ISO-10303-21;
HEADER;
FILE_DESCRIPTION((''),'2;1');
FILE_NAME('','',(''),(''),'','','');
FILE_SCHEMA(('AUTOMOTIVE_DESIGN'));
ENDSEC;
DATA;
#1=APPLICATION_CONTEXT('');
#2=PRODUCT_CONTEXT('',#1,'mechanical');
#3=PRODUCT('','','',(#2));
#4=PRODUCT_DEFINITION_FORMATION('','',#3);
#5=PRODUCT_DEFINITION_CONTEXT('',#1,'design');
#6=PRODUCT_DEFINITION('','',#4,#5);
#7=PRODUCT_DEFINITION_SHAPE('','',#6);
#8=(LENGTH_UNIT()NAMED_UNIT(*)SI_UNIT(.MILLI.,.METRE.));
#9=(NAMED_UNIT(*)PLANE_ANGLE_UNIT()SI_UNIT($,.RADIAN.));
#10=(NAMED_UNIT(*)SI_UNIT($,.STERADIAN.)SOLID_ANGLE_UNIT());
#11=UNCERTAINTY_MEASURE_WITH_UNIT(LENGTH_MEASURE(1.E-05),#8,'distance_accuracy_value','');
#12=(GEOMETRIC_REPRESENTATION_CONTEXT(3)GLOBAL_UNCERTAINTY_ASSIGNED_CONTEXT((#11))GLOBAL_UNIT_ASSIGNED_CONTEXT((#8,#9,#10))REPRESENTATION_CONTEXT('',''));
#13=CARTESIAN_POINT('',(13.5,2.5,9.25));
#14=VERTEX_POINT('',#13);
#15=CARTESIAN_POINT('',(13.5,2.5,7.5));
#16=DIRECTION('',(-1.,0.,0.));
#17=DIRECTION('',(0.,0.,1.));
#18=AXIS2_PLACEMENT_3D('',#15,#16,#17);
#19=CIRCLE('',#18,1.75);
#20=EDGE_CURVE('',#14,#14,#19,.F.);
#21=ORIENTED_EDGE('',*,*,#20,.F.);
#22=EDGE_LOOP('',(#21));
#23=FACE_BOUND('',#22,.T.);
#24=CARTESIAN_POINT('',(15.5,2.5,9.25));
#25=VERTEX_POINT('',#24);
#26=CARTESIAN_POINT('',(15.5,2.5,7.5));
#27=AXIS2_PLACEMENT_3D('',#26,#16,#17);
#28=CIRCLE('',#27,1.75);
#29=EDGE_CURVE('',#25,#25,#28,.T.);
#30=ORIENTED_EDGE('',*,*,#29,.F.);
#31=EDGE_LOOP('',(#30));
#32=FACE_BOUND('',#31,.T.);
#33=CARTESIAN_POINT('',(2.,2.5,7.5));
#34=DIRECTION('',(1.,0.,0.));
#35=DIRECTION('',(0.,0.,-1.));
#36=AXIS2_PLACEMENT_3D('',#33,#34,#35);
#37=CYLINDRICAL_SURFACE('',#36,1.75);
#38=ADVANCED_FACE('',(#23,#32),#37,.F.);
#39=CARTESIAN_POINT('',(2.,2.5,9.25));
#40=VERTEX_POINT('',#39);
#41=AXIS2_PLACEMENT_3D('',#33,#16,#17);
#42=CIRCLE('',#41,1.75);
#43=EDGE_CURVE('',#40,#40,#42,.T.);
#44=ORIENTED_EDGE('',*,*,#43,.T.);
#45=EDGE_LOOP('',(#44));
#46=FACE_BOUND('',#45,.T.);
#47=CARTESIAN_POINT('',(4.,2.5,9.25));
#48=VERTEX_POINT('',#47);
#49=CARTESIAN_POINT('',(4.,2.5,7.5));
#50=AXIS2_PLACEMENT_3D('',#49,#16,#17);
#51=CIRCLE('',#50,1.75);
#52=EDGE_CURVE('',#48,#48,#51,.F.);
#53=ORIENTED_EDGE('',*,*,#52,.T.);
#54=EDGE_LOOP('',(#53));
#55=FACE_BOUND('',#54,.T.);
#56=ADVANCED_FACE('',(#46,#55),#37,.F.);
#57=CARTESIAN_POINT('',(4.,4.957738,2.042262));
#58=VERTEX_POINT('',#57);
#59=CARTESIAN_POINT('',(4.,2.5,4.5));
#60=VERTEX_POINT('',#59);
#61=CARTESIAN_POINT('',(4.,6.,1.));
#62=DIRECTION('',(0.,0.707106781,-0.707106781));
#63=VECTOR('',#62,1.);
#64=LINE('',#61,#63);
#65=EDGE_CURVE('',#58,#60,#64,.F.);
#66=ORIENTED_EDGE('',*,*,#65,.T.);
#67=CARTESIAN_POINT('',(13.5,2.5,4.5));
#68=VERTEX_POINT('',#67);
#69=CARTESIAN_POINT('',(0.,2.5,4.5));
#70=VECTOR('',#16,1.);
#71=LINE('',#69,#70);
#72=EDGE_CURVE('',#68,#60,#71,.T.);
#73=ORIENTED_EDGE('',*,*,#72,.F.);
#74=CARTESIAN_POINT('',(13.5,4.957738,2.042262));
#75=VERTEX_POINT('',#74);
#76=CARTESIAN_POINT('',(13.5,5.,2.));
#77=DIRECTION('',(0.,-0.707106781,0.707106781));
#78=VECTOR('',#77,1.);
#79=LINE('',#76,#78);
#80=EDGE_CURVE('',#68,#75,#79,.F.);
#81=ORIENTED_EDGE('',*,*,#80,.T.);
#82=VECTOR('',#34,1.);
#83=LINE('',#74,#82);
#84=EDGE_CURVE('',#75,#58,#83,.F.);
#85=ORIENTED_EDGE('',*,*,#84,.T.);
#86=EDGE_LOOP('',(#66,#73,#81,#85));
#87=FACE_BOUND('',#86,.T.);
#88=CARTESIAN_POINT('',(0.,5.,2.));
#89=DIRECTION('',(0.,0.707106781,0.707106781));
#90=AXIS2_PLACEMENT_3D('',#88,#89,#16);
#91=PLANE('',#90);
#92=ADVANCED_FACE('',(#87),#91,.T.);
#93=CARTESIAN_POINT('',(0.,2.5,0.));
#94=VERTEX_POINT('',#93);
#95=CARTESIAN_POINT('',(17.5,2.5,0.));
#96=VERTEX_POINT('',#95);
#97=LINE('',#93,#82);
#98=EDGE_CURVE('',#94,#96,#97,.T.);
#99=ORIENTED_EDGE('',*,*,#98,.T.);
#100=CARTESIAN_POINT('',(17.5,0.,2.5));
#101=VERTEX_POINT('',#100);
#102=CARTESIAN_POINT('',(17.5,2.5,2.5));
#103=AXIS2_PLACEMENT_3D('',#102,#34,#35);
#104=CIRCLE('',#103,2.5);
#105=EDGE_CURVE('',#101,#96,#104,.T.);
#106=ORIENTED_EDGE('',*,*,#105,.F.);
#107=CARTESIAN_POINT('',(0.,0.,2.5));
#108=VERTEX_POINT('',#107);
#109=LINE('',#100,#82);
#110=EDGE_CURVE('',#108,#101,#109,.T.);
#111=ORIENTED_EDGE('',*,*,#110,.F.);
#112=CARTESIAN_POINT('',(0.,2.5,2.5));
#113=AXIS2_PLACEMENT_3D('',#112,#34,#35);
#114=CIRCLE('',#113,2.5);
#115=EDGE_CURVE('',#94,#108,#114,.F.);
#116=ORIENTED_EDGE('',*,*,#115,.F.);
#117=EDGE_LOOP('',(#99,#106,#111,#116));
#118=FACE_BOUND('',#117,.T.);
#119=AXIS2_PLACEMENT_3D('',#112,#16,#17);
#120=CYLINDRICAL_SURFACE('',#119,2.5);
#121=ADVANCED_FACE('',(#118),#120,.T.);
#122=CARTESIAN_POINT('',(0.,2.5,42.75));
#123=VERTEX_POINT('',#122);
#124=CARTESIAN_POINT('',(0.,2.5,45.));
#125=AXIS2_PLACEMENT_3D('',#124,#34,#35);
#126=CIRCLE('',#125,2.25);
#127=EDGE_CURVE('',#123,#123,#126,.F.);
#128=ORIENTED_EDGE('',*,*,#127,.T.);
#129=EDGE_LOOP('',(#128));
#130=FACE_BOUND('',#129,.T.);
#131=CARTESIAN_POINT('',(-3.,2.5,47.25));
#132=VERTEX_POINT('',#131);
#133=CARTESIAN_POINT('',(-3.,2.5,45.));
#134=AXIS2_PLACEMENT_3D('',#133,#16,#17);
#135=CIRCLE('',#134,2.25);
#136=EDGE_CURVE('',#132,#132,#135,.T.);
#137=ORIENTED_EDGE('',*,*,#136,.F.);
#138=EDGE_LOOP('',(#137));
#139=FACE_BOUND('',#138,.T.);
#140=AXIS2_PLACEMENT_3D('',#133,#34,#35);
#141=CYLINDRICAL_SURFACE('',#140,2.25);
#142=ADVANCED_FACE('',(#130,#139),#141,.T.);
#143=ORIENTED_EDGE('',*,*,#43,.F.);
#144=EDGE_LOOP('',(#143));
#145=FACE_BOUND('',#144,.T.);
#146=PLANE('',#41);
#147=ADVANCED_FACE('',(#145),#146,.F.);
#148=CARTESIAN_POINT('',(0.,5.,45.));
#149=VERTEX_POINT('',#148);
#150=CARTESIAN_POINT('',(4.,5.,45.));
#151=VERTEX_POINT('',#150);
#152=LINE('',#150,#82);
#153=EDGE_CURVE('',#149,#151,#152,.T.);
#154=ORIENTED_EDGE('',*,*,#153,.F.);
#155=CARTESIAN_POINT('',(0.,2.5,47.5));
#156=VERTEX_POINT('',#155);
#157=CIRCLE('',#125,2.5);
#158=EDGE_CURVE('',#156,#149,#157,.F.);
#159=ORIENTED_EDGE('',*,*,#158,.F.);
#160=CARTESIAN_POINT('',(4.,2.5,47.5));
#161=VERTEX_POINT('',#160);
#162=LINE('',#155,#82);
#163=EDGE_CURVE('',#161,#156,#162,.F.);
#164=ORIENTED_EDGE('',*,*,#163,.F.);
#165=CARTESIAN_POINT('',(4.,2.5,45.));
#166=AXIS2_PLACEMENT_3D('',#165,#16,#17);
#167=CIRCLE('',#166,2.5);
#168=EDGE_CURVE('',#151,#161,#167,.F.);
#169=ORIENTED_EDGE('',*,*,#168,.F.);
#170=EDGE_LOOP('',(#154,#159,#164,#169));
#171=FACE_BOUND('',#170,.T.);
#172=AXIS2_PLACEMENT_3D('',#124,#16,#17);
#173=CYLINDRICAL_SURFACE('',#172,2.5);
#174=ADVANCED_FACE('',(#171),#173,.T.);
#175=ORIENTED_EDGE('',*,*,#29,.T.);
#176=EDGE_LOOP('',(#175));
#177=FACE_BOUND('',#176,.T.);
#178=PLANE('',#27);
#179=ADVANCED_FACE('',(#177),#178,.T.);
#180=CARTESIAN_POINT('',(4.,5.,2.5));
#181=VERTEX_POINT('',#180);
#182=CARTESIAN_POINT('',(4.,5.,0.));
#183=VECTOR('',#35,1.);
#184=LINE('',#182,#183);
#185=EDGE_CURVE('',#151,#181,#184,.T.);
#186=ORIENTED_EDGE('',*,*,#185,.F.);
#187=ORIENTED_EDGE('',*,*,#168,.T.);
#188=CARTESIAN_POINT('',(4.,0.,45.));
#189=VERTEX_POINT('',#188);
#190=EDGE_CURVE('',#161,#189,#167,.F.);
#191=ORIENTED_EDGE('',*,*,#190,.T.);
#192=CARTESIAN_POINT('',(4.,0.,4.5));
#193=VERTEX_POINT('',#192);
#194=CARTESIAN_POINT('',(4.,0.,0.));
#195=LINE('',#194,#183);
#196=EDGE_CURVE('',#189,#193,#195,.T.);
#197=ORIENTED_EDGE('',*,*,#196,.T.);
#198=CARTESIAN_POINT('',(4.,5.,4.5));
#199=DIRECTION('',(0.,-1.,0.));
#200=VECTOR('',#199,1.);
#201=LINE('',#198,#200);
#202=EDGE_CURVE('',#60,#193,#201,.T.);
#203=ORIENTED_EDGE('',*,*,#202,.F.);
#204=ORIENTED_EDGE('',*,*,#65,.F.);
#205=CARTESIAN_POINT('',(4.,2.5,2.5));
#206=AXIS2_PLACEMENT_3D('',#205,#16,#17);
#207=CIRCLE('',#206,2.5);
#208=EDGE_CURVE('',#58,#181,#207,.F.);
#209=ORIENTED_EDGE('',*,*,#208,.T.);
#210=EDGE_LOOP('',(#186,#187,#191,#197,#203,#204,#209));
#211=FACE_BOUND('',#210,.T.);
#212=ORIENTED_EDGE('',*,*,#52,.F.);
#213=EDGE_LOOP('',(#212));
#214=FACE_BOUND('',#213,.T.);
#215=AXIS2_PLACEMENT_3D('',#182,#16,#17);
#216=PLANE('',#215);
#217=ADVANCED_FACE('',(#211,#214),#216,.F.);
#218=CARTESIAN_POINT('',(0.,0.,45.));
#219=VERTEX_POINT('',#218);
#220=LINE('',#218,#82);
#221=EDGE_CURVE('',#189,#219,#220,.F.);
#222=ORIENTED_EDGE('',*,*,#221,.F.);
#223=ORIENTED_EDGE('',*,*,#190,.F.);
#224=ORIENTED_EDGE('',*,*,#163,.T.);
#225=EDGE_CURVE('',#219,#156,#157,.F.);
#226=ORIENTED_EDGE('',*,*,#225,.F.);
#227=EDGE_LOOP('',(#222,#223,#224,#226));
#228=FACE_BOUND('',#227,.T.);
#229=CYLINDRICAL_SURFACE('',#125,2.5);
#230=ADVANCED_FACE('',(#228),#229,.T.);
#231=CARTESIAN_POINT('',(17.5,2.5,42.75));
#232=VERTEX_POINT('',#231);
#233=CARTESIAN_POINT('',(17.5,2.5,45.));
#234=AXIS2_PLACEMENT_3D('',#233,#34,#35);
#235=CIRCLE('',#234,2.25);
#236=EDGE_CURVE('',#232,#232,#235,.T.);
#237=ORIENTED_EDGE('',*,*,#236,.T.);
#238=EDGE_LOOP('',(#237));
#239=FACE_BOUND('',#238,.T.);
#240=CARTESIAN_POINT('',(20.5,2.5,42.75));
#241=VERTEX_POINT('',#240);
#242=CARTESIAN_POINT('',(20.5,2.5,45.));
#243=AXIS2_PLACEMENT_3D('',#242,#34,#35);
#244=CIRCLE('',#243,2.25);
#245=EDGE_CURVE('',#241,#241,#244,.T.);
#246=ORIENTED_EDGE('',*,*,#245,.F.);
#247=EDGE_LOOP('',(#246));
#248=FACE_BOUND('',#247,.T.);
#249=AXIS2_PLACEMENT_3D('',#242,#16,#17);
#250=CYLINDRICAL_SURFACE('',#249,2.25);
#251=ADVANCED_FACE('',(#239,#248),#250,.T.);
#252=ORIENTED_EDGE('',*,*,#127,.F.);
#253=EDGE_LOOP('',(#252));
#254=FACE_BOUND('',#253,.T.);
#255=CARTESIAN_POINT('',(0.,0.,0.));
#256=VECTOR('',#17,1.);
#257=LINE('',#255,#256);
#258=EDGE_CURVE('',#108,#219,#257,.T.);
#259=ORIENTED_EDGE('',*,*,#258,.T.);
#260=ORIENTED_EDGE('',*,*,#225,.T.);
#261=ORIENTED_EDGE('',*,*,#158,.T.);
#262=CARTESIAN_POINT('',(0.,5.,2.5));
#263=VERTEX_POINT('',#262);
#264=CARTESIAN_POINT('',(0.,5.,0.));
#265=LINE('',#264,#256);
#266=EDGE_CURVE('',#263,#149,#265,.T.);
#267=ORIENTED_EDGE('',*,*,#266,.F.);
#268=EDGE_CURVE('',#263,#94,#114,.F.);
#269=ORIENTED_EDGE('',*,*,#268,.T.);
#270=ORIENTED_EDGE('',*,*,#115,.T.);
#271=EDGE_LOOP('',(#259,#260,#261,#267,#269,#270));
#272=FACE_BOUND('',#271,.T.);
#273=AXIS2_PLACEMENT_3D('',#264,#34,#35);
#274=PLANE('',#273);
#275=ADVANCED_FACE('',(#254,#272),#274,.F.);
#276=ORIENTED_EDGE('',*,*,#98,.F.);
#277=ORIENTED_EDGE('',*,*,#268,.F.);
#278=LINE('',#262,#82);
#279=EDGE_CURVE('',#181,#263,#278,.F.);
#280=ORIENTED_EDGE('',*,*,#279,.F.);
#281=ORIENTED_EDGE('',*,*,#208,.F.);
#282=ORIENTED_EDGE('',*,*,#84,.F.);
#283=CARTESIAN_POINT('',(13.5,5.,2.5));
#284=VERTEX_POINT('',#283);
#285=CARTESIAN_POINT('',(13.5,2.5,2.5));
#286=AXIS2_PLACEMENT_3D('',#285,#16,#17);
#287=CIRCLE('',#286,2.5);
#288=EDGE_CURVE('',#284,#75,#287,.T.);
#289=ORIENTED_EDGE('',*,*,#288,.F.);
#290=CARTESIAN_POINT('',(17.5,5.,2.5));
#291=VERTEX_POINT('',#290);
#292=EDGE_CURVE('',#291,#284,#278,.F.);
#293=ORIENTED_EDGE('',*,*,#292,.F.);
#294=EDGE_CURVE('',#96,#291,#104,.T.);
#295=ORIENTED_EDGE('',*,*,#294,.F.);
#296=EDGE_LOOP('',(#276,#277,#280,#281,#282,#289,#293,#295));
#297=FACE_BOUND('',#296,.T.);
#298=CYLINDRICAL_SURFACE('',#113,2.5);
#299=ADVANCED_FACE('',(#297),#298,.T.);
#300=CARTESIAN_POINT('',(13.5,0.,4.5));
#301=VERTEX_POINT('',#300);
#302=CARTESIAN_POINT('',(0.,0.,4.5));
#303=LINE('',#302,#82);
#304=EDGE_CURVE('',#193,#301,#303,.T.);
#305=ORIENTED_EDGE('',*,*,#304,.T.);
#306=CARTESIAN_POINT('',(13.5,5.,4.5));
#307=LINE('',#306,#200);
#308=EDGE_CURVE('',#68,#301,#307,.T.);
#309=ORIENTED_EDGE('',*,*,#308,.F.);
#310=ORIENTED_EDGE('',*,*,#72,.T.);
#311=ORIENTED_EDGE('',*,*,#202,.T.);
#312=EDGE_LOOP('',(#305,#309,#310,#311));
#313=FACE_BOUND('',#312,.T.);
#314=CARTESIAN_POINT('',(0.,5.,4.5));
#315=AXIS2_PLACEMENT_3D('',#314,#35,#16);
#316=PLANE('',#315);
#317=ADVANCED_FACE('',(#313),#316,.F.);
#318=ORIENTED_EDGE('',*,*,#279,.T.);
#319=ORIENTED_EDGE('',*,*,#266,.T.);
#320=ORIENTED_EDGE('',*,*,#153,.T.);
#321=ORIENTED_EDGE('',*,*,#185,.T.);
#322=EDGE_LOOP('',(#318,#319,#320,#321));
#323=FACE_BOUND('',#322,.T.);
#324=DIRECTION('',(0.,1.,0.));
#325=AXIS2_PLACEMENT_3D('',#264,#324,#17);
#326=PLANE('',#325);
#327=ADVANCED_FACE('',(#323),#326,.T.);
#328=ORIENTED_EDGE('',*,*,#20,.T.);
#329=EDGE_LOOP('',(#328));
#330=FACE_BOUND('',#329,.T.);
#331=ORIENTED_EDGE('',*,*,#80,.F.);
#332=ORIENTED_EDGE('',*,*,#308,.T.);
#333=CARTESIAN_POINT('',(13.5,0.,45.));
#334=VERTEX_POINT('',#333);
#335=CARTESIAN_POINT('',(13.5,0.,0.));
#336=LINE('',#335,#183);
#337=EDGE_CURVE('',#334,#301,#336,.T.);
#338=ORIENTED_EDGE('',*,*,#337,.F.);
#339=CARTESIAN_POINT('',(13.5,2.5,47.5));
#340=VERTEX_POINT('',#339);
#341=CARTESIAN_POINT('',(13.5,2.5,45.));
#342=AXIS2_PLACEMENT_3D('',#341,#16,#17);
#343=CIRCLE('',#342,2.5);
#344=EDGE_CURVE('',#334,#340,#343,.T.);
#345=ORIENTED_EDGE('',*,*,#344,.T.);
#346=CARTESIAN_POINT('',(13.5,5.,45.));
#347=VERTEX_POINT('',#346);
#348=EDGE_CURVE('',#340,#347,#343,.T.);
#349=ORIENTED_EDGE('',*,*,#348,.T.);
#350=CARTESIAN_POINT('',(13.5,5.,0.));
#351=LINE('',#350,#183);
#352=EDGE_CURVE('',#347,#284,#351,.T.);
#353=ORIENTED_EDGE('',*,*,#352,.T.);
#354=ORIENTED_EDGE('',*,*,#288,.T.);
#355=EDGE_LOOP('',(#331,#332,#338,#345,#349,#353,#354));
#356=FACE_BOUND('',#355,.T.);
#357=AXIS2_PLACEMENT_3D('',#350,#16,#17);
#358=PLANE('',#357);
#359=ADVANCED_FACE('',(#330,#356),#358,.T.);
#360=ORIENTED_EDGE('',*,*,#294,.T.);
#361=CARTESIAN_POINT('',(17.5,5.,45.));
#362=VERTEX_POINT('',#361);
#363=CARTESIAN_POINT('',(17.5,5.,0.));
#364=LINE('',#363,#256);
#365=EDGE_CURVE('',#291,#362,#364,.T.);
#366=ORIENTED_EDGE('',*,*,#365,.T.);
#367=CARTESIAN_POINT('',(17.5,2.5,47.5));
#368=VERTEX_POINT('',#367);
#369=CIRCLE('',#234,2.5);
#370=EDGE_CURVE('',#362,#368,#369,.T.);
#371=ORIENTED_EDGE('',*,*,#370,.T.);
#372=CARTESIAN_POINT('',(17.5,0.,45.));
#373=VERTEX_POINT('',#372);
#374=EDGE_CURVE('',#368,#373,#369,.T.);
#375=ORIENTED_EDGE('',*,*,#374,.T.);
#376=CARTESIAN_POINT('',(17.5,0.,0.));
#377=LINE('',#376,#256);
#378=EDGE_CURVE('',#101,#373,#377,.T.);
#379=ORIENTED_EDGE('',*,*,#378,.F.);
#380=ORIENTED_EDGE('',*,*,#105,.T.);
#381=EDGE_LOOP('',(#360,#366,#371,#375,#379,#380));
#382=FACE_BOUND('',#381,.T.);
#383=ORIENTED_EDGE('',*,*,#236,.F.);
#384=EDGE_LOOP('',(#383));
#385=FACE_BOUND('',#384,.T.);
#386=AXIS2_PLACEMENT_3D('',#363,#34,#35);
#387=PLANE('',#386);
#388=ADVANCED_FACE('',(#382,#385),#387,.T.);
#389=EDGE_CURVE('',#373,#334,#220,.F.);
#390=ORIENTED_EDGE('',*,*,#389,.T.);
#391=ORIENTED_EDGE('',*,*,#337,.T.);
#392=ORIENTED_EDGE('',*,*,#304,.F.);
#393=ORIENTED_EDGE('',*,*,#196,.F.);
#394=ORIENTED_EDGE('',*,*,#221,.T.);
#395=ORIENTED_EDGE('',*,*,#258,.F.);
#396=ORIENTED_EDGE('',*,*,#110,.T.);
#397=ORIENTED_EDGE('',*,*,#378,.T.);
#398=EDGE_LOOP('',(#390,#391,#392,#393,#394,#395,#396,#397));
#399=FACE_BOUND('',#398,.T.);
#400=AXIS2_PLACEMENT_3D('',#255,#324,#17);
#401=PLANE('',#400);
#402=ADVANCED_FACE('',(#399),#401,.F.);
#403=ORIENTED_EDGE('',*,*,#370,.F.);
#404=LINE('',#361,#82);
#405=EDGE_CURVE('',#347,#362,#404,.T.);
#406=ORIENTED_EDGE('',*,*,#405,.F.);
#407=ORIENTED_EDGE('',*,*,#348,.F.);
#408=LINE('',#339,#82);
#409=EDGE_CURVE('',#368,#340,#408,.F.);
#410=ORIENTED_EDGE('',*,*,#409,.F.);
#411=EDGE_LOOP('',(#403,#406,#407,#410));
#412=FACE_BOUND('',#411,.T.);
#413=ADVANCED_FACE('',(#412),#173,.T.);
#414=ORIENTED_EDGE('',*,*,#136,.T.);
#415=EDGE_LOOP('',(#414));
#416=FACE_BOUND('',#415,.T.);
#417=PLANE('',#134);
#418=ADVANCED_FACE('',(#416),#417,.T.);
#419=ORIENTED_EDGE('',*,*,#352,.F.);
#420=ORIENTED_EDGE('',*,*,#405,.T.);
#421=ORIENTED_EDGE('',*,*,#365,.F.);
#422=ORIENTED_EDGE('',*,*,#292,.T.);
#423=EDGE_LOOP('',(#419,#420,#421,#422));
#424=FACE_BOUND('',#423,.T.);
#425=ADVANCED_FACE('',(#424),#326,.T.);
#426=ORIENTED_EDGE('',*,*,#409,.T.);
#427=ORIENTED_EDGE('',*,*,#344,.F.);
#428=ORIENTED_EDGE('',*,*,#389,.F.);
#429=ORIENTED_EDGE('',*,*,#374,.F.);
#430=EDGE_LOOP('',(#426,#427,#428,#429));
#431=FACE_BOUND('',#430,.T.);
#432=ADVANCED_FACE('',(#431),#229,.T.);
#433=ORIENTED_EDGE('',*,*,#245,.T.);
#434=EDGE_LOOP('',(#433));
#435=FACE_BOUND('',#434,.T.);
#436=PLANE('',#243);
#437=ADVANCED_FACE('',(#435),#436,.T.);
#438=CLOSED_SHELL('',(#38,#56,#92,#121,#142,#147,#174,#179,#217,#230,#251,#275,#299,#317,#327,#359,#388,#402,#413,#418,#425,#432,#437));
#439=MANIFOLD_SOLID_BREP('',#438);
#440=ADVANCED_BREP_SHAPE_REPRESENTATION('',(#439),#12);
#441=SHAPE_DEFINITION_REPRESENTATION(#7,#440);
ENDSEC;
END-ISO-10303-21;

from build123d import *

# Parameters (mm, degrees)
BOSS_EXTRUDE1_DEPTH     = 5
SKETCH2_R               = 2.25
BOSS_EXTRUDE2_DEPTH     = 3
FILLET3_R               = 2.5
BOSS_EXTRUDE3_START     = 3
SKETCH3_R               = 2.25
BOSS_EXTRUDE3_DEPTH     = 3
FILLET4_R               = 2.5
CHAMFER1_START          = 4.949747468
CHAMFER1_OUTLINE_W      = 9.5
CHAMFER1_OUTLINE_H      = 3.535533906
CHAMFER1_DEPTH          = 3.050252532
FILLET5_R               = 2.5
CUT_EXTRUDE1_DEPTH      = 11.5
CUT_EXTRUDE1_DEPTH_BACK = 2
SKETCH4_R               = 1.75


with BuildPart() as part:
    # Sketch1 → Boss-Extrude1 (new body)
    with BuildSketch(Plane(origin=(0, 0, 0), x_dir=(1, 0, 0), z_dir=(0, 1, 0))):
        Polygon((17.5, 0), (0, 0), (0, -47.5), (4, -47.5), (4, -4.5), (13.5, -4.5), (13.5, -47.5), (17.5, -47.5), align=None)
    extrude(amount=BOSS_EXTRUDE1_DEPTH)

    # Sketch2 → Boss-Extrude2 (add)
    with BuildSketch(Plane(origin=(17.5, 0, 0), x_dir=(0, 0, -1), z_dir=(1, 0, 0))):
        with Locations((-45, 2.5)):
            Circle(SKETCH2_R)
    extrude(amount=BOSS_EXTRUDE2_DEPTH)

    # Fillet3
    fillet3_edges = [part.edges().sort_by_distance(p)[0] for p in [
        (15.5, 0, 47.5),
        (15.5, 5, 47.5),
    ]]
    fillet(fillet3_edges, radius=FILLET3_R - 0.0001)  # a hair under: the kernel refuses the full size

    # Sketch3 → Boss-Extrude3 (add)
    with BuildSketch(Plane.ZY.offset(BOSS_EXTRUDE3_START)):
        with Locations(Location((45, 2.5, 0), (0, 0, 180))):
            Circle(SKETCH3_R)
    extrude(amount=-BOSS_EXTRUDE3_DEPTH)

    # Fillet4
    fillet4_edges = [part.edges().sort_by_distance(p)[0] for p in [
        (2, 0, 47.5),
        (2, 5, 47.5),
    ]]
    fillet(fillet4_edges, radius=FILLET4_R - 0.0001)  # a hair under: the kernel refuses the full size

    # Chamfer1: read off the stored shape, not the designer's step
    # Chamfer1 outline → Chamfer1 (cut)
    with BuildSketch(Plane(origin=(0, 0, 0), x_dir=(1, 0, 0), z_dir=(0, 0.7071067811865476, 0.7071067811865476)).offset(CHAMFER1_START)):
        with Locations((8.75, 0.353553391)):
            Rectangle(CHAMFER1_OUTLINE_W, CHAMFER1_OUTLINE_H)
    extrude(amount=CHAMFER1_DEPTH, mode=Mode.SUBTRACT)

    # Fillet5
    # the kernel refuses this fillet: 2.5 mm, written as the material it takes off along each edge
    with BuildSketch(Plane(origin=(23.75, 0, 0), x_dir=(0, 0, 1), z_dir=(-1, 0, 0))) as fillet5_piece_1:
        with BuildLine():
            CenterArc((FILLET5_R, FILLET5_R), FILLET5_R, 180, 90)
            Line((0, FILLET5_R), (0, 0))
            Line((0, 0), (FILLET5_R, 0))
        make_face()
    extrude(amount=30, mode=Mode.SUBTRACT)
    with BuildSketch(Plane(origin=(23.75, 5, 0), x_dir=(0, 0, 1), z_dir=(-1, 0, 0))) as fillet5_piece_2:
        with BuildLine():
            CenterArc((FILLET5_R, -FILLET5_R), FILLET5_R, 90, 90)
            Line((0, -FILLET5_R), (0, 0))
            Line((0, 0), (FILLET5_R, 0))
        make_face()
    extrude(amount=30, mode=Mode.SUBTRACT)

    # Sketch4 → Cut-Extrude1 (cut, two sides: drawn at the far end of the back side and taken through both)
    with BuildSketch(Plane.ZY.offset(-13.5).offset(-CUT_EXTRUDE1_DEPTH_BACK)):
        with Locations((7.5, 2.5)):
            Circle(SKETCH4_R)
    extrude(amount=CUT_EXTRUDE1_DEPTH + CUT_EXTRUDE1_DEPTH_BACK, mode=Mode.SUBTRACT)


solid = part.part
